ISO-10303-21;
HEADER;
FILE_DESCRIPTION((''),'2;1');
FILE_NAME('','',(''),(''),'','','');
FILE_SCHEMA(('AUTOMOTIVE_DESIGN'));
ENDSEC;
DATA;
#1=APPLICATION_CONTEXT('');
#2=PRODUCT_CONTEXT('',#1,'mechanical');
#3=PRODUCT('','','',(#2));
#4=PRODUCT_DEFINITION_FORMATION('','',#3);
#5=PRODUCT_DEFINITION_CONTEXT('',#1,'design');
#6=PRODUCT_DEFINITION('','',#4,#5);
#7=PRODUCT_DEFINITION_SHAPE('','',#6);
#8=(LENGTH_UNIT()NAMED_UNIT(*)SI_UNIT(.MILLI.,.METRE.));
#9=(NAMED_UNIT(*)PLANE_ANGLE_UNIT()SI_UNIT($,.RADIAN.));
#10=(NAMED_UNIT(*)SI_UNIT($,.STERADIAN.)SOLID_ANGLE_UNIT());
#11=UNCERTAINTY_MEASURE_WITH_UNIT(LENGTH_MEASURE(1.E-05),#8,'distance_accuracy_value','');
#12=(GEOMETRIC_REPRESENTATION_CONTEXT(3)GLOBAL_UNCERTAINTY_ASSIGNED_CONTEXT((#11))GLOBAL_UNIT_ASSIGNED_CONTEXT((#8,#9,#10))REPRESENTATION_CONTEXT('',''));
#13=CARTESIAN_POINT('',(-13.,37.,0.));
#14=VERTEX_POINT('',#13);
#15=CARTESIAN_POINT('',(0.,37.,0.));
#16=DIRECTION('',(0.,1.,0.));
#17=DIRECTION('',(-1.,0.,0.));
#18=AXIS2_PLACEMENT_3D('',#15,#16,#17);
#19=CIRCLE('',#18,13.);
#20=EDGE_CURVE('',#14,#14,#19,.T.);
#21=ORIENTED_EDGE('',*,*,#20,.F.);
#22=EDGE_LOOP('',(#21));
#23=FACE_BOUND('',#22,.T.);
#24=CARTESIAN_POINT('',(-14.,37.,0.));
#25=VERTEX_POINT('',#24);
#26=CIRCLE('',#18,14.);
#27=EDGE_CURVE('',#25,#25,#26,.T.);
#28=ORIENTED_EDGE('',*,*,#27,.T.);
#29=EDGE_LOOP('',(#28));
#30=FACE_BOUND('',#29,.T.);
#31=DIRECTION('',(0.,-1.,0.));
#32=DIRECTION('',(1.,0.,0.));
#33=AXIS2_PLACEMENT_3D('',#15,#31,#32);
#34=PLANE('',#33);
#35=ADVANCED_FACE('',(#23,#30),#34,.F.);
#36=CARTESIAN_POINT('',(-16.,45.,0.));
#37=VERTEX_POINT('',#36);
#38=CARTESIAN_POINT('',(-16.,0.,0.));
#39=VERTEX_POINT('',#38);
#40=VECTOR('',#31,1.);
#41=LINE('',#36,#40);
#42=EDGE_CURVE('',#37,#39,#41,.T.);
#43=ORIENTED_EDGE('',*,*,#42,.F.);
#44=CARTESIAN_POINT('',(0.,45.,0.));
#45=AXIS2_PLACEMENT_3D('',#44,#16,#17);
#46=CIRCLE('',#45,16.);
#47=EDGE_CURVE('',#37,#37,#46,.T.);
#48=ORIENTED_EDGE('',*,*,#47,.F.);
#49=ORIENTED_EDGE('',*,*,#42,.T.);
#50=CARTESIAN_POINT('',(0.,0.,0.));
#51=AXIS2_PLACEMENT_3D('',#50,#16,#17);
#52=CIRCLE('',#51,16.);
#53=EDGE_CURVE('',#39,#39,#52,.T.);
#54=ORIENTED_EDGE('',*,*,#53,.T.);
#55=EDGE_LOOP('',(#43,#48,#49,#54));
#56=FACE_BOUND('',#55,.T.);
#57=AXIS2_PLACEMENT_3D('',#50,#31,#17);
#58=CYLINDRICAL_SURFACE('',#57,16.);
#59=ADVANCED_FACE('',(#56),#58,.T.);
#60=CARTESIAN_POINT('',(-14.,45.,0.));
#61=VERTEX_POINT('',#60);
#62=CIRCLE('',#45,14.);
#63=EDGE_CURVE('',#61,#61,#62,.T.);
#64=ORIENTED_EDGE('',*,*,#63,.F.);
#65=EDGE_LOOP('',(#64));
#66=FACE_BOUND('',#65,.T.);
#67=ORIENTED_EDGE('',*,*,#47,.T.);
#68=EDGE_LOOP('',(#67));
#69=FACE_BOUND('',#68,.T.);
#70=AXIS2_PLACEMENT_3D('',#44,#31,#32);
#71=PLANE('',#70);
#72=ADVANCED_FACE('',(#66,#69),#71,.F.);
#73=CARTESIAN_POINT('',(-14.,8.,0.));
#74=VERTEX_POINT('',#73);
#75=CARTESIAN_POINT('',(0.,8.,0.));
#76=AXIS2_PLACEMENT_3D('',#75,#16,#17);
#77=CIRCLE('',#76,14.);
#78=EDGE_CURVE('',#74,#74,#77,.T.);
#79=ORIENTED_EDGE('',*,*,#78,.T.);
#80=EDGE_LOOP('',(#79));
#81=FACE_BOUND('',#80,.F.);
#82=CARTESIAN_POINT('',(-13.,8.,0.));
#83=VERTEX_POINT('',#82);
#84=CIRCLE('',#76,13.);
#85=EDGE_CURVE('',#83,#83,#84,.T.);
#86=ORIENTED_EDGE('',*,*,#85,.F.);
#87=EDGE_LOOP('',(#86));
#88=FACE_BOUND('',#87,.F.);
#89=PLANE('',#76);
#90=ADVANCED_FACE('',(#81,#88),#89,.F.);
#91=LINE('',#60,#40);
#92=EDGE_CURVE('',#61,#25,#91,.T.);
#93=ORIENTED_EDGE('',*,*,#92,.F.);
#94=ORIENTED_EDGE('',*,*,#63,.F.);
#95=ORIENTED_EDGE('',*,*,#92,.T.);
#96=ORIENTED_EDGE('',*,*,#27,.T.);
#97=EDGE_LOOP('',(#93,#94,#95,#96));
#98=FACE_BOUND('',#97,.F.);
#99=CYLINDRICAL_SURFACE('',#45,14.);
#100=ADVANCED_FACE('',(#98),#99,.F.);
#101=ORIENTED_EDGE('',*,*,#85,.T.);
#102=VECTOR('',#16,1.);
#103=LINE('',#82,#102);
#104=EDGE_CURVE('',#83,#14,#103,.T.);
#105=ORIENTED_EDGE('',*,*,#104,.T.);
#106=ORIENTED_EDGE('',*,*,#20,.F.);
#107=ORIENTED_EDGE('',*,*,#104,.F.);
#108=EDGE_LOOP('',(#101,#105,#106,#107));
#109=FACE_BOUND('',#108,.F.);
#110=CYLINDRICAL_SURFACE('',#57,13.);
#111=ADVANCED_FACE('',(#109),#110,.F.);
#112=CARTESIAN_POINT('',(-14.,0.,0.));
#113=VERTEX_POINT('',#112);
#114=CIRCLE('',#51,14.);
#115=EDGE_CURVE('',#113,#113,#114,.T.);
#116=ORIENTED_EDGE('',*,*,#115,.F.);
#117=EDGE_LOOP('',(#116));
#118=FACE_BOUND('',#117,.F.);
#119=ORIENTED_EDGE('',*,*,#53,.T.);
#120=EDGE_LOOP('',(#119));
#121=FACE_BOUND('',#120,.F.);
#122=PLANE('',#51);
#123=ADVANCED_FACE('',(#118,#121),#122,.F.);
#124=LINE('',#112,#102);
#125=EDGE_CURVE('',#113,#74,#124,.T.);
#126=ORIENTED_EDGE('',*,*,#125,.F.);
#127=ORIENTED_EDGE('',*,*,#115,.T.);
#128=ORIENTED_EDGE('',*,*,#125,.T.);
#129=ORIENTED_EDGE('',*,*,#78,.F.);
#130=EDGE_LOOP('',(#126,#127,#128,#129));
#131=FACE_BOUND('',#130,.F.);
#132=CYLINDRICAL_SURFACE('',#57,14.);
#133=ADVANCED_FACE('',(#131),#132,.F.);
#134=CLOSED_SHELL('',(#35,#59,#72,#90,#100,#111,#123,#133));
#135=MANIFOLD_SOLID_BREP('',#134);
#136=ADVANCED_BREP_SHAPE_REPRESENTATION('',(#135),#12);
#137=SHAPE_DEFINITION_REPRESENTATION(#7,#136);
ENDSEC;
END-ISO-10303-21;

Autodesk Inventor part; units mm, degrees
ref_plane "YZ Plane" through (0, 0, 0) normal (1, 0, 0) x (0, 1, 0)
ref_plane "XZ Plane" through (0, 0, 0) normal (0, 1, 0) x (-1, 0, 0)
ref_plane "XY Plane" through (0, 0, 0) normal (0, 0, 1) x (1, 0, 0)
sketch "Sketch1" plane through (0, 0, 0) normal (0, 1, 0) x (-1, 0, 0)
  circle A0 centre (0, 0) radius 14
  circle A1 centre (0, 0) radius 13
  circle A2 centre (0, 0) radius 16
  dimension "d0" = 26
  dimension "d1" = 28
  dimension "d2" = 32
extrude "Extrusion1" add sketch "Sketch1" along normal blind 22.5 contours A0 | A2
extrude "Extrusion2" cut sketch "Sketch1" along normal blind 8 contours A0
mirror "Mirror1" about plane through (0, 22.5, 0) normal (0, 1, 0)
equation "\"d0\" = CsapágyHázBelsőÁtmérő"
equation "\"d1\" = CsapágyKülsőÁtmérő"
equation "\"d2\" = CsapágyHázKülsőÁtmérő"
equation "\"d3\" = 0.5 * CsapágyHázHoszza"
equation "\"d5\" = CsapágySzélesége"
equation "\"ZártSzelvényFalVastagság\" = 1.5"
equation "\"ZártSzelvényBelsőÁtmérő\" = 12"
equation "\"ZártSzelvényKülsőÁtmérő\" = 15"
equation "\"CsapágyBelsőÁtmérő\" = 12"
equation "\"CsapágySzélesége\" = 8"
equation "\"CsapágyKülsőÁtmérő\" = 28"
equation "\"CsapágyHázBelsőÁtmérő\" = 26"
equation "\"CsapágyHázHoszza\" = 45"
equation "\"CsapágyHázKülsőÁtmérő\" = 32"
properties part number "CsapágyHáz" material "Acetal Resin, Black"
